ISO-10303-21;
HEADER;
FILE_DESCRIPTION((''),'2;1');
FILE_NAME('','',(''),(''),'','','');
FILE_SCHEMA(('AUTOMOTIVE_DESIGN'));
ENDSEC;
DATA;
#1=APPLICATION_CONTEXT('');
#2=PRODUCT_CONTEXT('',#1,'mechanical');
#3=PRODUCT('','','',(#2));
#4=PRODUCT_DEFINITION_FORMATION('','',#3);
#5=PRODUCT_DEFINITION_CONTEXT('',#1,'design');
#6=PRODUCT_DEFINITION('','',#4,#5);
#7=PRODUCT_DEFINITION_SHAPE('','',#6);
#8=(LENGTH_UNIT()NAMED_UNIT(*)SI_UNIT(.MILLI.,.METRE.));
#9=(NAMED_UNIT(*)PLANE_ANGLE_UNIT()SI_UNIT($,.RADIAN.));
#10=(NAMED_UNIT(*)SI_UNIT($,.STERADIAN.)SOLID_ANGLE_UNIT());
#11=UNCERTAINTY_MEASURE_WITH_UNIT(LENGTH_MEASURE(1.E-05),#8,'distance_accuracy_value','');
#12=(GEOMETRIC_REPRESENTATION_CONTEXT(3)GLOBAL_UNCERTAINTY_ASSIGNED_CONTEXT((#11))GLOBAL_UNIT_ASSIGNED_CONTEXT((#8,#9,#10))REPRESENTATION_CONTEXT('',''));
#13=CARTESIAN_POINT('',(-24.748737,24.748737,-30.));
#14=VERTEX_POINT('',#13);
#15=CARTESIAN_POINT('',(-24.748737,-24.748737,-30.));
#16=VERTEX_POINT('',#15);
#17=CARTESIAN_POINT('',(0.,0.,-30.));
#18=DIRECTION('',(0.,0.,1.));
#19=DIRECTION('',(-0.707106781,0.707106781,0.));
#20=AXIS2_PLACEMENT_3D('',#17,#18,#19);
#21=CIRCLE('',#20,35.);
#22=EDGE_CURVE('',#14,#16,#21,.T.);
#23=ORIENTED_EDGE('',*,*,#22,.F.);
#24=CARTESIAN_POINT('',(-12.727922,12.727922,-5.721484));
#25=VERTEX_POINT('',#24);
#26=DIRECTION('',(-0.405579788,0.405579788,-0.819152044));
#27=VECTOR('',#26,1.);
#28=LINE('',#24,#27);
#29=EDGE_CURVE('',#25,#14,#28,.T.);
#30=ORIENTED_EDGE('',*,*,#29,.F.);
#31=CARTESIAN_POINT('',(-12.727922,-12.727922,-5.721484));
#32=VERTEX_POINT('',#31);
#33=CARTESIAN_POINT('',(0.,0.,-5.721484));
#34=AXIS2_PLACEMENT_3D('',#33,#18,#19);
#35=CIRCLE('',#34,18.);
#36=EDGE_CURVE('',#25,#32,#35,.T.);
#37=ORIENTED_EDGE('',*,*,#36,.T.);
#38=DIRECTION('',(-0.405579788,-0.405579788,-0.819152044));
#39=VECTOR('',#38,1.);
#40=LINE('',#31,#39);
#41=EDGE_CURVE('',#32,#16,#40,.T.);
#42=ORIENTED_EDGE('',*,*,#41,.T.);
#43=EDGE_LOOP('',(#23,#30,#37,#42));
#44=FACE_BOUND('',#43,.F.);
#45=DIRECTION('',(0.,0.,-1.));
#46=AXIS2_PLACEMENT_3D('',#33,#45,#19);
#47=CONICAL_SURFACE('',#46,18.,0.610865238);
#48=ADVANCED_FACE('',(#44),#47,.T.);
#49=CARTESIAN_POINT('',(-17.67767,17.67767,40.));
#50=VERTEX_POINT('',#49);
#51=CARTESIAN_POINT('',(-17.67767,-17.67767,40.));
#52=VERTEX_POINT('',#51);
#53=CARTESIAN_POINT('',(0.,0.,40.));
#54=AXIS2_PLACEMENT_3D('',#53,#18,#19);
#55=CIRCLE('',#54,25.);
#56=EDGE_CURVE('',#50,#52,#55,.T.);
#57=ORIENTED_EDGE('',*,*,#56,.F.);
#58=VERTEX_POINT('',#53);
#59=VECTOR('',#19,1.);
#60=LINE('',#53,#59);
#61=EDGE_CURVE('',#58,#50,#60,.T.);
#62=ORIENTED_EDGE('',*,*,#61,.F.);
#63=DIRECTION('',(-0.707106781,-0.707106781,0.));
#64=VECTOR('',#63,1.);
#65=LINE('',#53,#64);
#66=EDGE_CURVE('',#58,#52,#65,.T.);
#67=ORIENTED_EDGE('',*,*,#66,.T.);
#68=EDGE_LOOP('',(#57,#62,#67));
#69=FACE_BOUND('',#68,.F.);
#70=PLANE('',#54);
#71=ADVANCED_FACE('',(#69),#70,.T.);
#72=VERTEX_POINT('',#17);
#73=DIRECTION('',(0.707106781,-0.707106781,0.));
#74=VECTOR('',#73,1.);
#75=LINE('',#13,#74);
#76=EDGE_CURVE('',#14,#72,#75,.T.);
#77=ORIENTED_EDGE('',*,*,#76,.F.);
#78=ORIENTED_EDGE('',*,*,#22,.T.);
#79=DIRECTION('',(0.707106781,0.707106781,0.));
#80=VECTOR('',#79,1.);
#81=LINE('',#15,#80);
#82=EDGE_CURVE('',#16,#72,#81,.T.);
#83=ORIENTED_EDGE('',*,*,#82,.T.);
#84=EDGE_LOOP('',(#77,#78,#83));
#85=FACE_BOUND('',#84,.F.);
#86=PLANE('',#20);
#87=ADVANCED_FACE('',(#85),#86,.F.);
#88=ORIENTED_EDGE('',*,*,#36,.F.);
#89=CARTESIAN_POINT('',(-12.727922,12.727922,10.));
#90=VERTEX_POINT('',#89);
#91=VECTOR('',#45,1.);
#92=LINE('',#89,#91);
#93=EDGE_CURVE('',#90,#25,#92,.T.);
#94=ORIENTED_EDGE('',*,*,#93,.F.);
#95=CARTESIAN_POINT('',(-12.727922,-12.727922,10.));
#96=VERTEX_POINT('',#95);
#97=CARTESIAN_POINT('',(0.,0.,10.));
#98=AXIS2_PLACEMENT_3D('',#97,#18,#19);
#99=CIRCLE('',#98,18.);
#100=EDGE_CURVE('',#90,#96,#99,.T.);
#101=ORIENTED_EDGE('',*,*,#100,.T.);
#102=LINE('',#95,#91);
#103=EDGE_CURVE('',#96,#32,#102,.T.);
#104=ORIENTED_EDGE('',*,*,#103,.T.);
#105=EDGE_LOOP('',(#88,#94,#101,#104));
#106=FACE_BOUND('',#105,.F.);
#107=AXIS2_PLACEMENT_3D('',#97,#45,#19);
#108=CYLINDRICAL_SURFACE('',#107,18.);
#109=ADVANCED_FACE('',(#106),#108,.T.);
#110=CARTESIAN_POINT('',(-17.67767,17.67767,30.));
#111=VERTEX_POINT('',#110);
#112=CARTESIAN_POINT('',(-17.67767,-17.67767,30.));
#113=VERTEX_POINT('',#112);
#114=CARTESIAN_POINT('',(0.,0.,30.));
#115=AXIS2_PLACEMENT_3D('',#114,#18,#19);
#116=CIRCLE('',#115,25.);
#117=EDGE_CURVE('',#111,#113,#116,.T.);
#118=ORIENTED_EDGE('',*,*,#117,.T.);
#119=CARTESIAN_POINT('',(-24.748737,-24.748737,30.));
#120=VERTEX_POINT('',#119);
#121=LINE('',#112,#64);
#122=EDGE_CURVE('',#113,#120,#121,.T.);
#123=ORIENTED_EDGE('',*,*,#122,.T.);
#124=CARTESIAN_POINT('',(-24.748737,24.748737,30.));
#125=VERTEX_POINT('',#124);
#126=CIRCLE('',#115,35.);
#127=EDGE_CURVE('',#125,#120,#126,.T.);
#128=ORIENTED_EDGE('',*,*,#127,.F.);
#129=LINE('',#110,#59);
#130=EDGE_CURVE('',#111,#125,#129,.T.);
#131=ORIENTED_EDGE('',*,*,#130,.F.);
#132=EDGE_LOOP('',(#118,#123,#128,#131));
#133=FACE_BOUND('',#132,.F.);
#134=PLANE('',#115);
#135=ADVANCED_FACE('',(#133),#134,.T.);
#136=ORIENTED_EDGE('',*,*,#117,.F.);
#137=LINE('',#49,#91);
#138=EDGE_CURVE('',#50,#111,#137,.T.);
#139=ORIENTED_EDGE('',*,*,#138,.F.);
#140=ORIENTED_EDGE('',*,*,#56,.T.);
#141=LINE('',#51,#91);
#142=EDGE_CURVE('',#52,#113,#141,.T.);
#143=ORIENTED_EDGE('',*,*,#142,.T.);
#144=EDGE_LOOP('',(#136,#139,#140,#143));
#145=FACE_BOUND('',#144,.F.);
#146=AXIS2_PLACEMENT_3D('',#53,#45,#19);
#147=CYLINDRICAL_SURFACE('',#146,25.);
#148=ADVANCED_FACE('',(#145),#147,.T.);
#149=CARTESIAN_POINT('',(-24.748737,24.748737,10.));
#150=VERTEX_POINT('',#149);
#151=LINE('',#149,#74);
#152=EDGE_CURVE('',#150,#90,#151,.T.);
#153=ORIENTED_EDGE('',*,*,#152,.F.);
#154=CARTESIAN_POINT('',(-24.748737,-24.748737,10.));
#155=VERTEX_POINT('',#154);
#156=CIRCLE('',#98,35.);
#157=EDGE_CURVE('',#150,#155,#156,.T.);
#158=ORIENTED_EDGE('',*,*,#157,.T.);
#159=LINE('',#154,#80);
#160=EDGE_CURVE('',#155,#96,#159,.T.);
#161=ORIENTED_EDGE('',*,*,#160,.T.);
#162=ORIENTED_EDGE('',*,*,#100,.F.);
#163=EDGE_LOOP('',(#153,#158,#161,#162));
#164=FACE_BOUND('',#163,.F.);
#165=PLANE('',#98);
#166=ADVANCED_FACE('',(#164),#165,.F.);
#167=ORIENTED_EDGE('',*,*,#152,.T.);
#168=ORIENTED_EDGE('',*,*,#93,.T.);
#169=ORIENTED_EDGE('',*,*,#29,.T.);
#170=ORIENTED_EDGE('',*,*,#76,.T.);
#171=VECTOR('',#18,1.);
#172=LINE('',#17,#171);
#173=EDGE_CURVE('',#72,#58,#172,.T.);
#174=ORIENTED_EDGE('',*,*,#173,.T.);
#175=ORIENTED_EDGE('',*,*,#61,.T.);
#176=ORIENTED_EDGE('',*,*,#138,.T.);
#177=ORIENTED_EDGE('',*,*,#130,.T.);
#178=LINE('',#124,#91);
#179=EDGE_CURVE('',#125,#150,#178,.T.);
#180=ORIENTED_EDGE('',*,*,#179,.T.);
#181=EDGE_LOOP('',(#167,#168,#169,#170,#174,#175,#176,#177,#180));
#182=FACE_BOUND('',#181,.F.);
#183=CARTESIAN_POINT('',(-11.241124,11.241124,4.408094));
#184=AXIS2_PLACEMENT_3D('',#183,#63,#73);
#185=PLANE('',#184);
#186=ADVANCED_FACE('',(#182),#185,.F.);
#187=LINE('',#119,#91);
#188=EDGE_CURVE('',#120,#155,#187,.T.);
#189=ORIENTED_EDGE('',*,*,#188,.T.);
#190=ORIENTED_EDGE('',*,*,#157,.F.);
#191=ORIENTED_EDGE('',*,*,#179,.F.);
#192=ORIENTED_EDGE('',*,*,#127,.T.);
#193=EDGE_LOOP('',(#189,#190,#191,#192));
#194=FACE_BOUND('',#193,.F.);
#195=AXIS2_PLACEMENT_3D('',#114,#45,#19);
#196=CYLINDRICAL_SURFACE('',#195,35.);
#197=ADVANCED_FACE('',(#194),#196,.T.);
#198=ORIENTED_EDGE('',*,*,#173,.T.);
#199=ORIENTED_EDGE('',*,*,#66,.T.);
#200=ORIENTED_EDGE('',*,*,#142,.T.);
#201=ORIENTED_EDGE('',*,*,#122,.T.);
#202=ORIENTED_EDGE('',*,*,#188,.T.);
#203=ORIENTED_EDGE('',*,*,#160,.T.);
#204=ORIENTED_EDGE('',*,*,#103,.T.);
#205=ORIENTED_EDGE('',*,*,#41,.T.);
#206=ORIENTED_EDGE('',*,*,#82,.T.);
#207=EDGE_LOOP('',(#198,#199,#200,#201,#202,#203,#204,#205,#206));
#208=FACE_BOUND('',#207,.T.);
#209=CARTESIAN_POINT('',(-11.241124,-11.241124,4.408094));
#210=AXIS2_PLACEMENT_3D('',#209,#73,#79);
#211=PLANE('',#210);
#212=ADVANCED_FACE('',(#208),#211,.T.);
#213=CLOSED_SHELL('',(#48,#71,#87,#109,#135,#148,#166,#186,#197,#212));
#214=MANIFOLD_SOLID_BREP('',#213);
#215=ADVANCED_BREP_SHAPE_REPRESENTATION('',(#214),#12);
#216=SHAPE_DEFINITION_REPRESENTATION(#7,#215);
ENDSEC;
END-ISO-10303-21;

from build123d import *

# Parameters (mm, degrees)
F1_ANGLE_BACK = 45
F1_ANGLE      = 90


# Not quite as in the source:
# - a feature of the source that left no trace in its solid (it failed there, or was rolled back) is left out


with BuildPart() as f1:
    # F0 (on Front) → F1 (revolve)
    with BuildSketch(Plane.XZ, mode=Mode.PRIVATE) as f1_sk:
        Polygon((0, 40), (-25, 40), (-25, 30), (-35, 30), (-35, 10), (-18, 10), (-18, -5.7214838854), (-35, -30), (0, -30), align=None)
    revolve(f1_sk.sketch.rotate(Axis((0, 0, 5), (0, 0, 1)), -F1_ANGLE_BACK), axis=Axis((0, 0, 5), (0, 0, 1)), revolution_arc=F1_ANGLE)


solid = f1.part
